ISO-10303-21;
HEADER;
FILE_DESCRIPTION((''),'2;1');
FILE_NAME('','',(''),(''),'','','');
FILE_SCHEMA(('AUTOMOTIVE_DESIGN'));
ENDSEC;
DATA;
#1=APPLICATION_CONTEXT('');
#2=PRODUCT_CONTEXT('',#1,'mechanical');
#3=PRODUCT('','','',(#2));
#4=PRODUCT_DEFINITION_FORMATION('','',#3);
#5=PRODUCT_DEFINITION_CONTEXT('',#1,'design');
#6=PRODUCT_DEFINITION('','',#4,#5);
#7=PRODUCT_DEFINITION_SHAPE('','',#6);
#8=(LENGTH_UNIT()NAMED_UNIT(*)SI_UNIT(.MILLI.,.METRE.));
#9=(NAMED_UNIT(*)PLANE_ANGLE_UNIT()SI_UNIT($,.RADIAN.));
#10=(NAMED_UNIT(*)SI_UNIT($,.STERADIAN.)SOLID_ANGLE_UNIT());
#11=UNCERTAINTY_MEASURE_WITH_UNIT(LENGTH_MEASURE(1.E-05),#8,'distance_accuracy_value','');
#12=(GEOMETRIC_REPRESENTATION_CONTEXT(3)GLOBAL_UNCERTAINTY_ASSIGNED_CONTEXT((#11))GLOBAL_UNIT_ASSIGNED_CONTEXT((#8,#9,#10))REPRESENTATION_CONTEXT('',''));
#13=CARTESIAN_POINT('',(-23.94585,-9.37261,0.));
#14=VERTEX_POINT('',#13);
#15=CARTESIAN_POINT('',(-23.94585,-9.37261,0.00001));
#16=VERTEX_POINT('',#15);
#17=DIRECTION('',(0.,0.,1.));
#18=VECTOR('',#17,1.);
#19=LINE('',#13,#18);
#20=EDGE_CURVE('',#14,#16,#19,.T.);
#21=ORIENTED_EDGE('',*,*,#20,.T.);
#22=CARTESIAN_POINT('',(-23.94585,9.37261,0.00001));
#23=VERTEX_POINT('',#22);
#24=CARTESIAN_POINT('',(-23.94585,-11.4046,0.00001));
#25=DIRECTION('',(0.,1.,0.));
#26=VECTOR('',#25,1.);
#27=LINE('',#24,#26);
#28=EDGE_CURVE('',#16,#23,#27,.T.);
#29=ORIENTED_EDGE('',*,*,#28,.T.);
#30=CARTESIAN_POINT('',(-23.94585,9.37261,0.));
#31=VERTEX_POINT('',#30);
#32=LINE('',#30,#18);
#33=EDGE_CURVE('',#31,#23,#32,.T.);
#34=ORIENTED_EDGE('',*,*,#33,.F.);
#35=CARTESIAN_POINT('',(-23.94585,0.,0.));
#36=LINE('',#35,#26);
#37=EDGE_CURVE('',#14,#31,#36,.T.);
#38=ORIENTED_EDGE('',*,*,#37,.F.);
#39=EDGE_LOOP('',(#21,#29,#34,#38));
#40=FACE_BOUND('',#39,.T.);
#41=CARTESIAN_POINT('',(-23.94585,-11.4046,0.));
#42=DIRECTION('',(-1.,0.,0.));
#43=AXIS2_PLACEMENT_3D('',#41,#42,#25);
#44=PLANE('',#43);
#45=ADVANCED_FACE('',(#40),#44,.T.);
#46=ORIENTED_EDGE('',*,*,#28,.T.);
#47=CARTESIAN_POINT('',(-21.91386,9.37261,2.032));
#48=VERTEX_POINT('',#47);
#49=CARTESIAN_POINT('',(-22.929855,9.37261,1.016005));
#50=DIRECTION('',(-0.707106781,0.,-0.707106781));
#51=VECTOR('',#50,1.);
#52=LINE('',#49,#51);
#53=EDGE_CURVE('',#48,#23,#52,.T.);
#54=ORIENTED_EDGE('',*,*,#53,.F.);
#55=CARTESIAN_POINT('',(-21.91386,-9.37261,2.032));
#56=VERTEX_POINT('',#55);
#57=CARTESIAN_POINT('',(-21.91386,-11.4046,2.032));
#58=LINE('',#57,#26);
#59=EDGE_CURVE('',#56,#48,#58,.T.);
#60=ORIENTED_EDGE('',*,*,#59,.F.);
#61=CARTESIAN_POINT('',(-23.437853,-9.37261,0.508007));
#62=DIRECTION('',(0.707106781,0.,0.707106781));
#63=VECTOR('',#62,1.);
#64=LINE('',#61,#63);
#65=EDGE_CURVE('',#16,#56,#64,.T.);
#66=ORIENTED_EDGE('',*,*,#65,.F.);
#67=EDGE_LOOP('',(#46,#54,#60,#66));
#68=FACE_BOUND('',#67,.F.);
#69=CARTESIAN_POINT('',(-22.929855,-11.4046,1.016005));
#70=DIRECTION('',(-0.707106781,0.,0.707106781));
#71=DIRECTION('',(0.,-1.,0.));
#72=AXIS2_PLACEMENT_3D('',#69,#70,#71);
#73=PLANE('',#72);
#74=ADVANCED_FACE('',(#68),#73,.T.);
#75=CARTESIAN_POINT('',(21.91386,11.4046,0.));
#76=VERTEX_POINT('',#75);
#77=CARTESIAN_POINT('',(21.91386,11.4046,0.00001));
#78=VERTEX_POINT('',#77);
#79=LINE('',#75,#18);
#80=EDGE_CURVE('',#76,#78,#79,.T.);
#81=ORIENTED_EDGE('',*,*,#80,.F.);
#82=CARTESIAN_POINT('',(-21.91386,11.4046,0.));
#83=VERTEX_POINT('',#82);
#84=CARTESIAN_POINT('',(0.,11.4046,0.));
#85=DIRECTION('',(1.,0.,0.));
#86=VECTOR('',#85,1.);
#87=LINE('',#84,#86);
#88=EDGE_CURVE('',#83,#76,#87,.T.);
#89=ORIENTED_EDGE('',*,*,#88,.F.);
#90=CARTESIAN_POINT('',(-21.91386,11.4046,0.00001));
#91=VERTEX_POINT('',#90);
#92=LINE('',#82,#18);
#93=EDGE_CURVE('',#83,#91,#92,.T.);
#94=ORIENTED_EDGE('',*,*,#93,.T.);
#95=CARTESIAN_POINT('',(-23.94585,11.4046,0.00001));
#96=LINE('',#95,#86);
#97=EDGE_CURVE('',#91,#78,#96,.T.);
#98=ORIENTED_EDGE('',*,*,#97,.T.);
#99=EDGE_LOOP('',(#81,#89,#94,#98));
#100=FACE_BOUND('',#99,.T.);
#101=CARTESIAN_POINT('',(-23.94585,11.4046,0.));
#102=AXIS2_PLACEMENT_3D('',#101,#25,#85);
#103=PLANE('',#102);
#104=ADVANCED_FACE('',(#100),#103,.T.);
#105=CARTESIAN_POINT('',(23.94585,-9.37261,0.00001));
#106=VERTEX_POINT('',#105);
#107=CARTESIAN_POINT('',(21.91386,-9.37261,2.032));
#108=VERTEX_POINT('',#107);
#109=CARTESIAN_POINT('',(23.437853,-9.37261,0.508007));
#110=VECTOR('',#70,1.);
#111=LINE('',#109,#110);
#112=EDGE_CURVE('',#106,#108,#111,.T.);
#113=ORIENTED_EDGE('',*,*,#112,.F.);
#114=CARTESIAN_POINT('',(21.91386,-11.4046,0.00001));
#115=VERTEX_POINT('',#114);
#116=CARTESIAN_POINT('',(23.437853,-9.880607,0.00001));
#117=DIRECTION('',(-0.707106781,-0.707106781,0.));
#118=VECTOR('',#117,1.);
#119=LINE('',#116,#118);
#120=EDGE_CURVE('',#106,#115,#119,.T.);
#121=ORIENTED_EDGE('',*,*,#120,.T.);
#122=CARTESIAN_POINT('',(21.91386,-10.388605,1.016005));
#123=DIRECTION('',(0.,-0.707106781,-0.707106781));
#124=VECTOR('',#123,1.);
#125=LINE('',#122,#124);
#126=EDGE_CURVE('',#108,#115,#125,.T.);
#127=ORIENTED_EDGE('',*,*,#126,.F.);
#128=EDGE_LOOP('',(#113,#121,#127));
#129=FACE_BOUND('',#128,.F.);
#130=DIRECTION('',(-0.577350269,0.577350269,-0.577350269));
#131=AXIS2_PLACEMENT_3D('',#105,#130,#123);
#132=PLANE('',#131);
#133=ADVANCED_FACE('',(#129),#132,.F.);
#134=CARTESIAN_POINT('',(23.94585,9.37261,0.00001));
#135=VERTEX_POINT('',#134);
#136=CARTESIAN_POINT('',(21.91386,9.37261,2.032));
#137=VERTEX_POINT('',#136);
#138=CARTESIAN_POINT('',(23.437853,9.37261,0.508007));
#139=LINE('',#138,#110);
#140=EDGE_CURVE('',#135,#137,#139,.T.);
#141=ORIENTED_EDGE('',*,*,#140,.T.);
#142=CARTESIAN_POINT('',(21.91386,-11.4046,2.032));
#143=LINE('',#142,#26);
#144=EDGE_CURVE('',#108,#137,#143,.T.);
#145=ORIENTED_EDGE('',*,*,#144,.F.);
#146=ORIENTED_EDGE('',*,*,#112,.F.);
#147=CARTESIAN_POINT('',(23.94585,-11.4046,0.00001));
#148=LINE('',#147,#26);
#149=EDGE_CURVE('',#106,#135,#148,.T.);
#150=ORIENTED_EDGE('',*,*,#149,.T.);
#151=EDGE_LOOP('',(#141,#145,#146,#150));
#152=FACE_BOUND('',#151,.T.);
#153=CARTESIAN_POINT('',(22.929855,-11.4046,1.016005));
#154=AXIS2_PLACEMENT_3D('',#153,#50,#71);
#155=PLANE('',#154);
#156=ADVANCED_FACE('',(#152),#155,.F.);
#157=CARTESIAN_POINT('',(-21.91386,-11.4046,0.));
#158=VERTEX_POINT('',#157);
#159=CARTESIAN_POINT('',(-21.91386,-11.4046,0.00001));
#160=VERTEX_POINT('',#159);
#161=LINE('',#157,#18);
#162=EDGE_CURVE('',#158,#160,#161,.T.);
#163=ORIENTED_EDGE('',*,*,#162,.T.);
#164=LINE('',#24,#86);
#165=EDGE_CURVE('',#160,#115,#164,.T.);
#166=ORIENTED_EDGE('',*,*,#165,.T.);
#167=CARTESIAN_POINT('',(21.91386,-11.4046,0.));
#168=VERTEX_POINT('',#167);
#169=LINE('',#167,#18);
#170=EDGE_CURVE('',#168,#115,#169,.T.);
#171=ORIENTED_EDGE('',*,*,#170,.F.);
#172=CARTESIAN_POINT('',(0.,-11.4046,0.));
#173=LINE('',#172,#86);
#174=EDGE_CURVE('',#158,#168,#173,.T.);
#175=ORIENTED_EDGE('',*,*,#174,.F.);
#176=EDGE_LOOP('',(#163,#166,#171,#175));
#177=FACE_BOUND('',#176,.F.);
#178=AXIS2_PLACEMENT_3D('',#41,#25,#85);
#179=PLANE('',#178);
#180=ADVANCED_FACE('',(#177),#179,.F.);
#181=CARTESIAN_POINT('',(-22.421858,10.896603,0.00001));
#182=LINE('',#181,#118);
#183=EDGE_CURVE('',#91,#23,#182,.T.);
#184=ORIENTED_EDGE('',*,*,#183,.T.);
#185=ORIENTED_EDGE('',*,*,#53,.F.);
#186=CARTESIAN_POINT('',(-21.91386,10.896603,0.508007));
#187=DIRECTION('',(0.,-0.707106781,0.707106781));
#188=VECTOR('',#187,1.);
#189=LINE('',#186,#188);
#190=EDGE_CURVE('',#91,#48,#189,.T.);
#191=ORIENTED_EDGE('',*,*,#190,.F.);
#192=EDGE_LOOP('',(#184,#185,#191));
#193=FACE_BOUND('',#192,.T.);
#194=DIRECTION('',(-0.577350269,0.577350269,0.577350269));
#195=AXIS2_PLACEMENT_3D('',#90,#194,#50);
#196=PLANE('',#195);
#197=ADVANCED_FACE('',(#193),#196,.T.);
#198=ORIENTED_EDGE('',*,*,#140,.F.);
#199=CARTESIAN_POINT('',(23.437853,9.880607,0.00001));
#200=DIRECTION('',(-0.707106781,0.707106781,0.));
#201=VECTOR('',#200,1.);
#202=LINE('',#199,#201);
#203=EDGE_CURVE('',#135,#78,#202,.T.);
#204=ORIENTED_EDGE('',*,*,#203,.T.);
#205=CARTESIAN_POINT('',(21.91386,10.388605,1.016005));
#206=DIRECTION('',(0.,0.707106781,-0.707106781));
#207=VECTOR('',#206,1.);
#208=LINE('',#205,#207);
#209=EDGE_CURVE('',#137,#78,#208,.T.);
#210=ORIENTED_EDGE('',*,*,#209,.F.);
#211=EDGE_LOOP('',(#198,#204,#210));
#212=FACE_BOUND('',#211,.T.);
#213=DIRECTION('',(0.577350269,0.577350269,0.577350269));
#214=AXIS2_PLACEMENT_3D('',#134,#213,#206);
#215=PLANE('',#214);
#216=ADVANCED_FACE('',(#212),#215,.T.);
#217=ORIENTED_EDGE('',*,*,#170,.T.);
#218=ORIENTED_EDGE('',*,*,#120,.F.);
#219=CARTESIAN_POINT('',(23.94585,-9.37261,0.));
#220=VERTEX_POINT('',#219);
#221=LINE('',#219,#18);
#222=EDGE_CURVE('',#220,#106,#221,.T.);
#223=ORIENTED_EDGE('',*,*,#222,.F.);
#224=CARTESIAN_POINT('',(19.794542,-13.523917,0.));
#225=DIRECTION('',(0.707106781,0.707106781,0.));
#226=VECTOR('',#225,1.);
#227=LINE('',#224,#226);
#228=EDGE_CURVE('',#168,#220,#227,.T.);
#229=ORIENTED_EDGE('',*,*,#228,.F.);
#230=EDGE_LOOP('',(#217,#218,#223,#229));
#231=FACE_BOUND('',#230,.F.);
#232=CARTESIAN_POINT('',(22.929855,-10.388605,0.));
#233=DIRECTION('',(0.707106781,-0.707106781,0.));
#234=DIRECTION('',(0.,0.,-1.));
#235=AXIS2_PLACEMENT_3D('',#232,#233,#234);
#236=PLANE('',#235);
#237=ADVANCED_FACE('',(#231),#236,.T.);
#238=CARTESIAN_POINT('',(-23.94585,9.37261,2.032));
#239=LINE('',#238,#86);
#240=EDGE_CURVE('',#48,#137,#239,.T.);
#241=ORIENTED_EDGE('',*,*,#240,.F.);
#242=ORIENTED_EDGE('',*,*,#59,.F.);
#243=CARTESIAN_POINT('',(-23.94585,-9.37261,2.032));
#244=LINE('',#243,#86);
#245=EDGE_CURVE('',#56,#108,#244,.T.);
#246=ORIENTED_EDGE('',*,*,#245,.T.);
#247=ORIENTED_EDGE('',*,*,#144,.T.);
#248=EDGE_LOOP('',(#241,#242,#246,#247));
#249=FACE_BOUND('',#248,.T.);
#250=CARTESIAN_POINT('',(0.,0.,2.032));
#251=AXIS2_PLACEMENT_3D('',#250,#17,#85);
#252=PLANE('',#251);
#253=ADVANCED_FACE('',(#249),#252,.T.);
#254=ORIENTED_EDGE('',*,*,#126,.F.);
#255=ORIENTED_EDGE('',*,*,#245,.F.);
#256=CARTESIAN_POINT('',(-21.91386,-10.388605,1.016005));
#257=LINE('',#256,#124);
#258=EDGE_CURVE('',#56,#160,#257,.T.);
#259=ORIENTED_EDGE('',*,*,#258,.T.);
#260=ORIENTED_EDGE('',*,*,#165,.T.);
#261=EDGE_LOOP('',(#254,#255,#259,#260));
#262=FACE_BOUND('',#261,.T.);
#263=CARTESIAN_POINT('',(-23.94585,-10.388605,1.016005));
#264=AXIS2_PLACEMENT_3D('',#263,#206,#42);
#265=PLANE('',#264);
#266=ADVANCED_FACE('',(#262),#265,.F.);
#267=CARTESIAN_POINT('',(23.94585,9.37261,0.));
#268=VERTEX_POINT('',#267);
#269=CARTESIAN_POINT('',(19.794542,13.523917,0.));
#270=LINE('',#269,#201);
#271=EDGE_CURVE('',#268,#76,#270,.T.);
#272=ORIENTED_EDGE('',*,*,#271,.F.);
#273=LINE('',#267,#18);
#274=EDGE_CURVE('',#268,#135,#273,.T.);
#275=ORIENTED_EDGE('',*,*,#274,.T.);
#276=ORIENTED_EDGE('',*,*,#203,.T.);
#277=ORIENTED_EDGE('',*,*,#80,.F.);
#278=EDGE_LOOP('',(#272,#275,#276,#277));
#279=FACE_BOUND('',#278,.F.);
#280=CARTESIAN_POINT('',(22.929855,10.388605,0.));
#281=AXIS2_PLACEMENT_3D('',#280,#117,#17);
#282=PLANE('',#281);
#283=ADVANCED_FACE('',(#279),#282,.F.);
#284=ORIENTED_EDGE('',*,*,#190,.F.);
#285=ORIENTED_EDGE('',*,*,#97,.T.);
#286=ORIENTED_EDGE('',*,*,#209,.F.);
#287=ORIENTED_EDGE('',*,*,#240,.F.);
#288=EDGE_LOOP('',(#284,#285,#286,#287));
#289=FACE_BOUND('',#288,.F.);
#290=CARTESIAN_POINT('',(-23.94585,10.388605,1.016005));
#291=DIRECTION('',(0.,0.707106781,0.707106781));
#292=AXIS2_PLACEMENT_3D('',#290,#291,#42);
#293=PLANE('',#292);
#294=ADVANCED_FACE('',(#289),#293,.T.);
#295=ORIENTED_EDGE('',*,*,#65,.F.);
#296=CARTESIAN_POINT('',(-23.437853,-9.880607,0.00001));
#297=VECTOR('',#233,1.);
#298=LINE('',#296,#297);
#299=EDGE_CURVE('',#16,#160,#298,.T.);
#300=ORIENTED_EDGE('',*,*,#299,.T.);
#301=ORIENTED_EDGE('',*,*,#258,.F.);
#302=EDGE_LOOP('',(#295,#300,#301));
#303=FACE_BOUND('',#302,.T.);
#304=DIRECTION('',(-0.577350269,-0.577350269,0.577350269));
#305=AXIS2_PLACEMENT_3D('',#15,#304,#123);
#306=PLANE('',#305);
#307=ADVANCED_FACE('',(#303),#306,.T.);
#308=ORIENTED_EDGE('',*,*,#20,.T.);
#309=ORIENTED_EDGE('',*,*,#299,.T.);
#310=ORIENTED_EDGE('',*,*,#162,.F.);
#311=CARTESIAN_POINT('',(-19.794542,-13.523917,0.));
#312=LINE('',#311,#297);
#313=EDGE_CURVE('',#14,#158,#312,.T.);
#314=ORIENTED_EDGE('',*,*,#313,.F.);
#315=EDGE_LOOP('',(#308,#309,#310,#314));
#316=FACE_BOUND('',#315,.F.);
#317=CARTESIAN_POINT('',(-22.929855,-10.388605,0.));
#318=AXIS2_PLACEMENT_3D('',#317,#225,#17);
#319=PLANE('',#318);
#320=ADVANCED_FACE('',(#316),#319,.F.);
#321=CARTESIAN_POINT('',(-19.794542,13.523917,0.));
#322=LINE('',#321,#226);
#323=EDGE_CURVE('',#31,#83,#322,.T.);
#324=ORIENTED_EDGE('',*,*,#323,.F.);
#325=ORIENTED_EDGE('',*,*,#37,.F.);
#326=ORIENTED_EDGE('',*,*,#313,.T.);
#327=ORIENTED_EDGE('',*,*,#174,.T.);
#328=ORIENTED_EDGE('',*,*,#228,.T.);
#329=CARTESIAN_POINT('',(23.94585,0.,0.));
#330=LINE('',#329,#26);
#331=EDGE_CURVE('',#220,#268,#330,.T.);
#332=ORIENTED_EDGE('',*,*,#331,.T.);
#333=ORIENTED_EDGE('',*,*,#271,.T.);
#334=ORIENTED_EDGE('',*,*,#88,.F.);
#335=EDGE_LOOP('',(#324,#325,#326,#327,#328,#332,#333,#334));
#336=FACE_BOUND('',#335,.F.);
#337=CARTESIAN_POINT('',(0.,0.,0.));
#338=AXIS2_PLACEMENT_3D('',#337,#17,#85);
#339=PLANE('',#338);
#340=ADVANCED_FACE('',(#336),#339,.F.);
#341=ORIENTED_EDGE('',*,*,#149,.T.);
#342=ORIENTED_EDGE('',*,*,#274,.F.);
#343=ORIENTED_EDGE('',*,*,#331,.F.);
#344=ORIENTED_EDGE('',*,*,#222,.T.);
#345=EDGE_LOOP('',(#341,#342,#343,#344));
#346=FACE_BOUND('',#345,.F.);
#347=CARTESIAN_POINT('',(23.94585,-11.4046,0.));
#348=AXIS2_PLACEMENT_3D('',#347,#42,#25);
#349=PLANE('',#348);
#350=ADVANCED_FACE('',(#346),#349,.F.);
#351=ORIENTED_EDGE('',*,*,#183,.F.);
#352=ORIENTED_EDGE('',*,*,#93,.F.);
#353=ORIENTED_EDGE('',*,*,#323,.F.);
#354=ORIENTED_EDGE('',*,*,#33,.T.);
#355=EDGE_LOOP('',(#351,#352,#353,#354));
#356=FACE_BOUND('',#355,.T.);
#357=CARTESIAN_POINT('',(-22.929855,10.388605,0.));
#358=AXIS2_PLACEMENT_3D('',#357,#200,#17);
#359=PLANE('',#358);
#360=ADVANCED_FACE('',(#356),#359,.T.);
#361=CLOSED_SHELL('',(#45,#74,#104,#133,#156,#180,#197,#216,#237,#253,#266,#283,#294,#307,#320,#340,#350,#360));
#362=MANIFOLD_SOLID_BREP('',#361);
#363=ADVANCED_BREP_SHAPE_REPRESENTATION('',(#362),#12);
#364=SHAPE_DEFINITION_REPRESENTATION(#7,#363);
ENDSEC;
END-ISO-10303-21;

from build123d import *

# Parameters (mm, degrees)
F0_W     = 47.8917
F0_H     = 22.8092
F1_DEPTH = 2.032
F2_SIZE  = 2.03199


# Not quite as in the source:
# - a fillet or chamfer is up to 0.001 mm smaller than in the source, because OpenCascade refuses the exact size


with BuildPart() as f1:
    # F0 (on Top) → F1 (new body)
    with BuildSketch(Plane.XY):
        Rectangle(F0_W, F0_H)
    extrude(amount=F1_DEPTH)

    # F2 (size 2.032 in the source; OpenCascade refuses exactly that, so slightly less here)
    f2_edges = [f1.edges().sort_by_distance(p)[0] for p in [
        (0, -11.4046, 2.032),
        (-23.94585, 0, 2.032),
        (0, 11.4046, 2.032),
        (23.94585, 0, 2.032),
        (23.94585, -11.4046, 1.016),
        (-23.94585, -11.4046, 1.016),
        (23.94585, 11.4046, 1.016),
        (-23.94585, 11.4046, 1.016),
    ]]
    chamfer(f2_edges, length=F2_SIZE)


solid = f1.part
